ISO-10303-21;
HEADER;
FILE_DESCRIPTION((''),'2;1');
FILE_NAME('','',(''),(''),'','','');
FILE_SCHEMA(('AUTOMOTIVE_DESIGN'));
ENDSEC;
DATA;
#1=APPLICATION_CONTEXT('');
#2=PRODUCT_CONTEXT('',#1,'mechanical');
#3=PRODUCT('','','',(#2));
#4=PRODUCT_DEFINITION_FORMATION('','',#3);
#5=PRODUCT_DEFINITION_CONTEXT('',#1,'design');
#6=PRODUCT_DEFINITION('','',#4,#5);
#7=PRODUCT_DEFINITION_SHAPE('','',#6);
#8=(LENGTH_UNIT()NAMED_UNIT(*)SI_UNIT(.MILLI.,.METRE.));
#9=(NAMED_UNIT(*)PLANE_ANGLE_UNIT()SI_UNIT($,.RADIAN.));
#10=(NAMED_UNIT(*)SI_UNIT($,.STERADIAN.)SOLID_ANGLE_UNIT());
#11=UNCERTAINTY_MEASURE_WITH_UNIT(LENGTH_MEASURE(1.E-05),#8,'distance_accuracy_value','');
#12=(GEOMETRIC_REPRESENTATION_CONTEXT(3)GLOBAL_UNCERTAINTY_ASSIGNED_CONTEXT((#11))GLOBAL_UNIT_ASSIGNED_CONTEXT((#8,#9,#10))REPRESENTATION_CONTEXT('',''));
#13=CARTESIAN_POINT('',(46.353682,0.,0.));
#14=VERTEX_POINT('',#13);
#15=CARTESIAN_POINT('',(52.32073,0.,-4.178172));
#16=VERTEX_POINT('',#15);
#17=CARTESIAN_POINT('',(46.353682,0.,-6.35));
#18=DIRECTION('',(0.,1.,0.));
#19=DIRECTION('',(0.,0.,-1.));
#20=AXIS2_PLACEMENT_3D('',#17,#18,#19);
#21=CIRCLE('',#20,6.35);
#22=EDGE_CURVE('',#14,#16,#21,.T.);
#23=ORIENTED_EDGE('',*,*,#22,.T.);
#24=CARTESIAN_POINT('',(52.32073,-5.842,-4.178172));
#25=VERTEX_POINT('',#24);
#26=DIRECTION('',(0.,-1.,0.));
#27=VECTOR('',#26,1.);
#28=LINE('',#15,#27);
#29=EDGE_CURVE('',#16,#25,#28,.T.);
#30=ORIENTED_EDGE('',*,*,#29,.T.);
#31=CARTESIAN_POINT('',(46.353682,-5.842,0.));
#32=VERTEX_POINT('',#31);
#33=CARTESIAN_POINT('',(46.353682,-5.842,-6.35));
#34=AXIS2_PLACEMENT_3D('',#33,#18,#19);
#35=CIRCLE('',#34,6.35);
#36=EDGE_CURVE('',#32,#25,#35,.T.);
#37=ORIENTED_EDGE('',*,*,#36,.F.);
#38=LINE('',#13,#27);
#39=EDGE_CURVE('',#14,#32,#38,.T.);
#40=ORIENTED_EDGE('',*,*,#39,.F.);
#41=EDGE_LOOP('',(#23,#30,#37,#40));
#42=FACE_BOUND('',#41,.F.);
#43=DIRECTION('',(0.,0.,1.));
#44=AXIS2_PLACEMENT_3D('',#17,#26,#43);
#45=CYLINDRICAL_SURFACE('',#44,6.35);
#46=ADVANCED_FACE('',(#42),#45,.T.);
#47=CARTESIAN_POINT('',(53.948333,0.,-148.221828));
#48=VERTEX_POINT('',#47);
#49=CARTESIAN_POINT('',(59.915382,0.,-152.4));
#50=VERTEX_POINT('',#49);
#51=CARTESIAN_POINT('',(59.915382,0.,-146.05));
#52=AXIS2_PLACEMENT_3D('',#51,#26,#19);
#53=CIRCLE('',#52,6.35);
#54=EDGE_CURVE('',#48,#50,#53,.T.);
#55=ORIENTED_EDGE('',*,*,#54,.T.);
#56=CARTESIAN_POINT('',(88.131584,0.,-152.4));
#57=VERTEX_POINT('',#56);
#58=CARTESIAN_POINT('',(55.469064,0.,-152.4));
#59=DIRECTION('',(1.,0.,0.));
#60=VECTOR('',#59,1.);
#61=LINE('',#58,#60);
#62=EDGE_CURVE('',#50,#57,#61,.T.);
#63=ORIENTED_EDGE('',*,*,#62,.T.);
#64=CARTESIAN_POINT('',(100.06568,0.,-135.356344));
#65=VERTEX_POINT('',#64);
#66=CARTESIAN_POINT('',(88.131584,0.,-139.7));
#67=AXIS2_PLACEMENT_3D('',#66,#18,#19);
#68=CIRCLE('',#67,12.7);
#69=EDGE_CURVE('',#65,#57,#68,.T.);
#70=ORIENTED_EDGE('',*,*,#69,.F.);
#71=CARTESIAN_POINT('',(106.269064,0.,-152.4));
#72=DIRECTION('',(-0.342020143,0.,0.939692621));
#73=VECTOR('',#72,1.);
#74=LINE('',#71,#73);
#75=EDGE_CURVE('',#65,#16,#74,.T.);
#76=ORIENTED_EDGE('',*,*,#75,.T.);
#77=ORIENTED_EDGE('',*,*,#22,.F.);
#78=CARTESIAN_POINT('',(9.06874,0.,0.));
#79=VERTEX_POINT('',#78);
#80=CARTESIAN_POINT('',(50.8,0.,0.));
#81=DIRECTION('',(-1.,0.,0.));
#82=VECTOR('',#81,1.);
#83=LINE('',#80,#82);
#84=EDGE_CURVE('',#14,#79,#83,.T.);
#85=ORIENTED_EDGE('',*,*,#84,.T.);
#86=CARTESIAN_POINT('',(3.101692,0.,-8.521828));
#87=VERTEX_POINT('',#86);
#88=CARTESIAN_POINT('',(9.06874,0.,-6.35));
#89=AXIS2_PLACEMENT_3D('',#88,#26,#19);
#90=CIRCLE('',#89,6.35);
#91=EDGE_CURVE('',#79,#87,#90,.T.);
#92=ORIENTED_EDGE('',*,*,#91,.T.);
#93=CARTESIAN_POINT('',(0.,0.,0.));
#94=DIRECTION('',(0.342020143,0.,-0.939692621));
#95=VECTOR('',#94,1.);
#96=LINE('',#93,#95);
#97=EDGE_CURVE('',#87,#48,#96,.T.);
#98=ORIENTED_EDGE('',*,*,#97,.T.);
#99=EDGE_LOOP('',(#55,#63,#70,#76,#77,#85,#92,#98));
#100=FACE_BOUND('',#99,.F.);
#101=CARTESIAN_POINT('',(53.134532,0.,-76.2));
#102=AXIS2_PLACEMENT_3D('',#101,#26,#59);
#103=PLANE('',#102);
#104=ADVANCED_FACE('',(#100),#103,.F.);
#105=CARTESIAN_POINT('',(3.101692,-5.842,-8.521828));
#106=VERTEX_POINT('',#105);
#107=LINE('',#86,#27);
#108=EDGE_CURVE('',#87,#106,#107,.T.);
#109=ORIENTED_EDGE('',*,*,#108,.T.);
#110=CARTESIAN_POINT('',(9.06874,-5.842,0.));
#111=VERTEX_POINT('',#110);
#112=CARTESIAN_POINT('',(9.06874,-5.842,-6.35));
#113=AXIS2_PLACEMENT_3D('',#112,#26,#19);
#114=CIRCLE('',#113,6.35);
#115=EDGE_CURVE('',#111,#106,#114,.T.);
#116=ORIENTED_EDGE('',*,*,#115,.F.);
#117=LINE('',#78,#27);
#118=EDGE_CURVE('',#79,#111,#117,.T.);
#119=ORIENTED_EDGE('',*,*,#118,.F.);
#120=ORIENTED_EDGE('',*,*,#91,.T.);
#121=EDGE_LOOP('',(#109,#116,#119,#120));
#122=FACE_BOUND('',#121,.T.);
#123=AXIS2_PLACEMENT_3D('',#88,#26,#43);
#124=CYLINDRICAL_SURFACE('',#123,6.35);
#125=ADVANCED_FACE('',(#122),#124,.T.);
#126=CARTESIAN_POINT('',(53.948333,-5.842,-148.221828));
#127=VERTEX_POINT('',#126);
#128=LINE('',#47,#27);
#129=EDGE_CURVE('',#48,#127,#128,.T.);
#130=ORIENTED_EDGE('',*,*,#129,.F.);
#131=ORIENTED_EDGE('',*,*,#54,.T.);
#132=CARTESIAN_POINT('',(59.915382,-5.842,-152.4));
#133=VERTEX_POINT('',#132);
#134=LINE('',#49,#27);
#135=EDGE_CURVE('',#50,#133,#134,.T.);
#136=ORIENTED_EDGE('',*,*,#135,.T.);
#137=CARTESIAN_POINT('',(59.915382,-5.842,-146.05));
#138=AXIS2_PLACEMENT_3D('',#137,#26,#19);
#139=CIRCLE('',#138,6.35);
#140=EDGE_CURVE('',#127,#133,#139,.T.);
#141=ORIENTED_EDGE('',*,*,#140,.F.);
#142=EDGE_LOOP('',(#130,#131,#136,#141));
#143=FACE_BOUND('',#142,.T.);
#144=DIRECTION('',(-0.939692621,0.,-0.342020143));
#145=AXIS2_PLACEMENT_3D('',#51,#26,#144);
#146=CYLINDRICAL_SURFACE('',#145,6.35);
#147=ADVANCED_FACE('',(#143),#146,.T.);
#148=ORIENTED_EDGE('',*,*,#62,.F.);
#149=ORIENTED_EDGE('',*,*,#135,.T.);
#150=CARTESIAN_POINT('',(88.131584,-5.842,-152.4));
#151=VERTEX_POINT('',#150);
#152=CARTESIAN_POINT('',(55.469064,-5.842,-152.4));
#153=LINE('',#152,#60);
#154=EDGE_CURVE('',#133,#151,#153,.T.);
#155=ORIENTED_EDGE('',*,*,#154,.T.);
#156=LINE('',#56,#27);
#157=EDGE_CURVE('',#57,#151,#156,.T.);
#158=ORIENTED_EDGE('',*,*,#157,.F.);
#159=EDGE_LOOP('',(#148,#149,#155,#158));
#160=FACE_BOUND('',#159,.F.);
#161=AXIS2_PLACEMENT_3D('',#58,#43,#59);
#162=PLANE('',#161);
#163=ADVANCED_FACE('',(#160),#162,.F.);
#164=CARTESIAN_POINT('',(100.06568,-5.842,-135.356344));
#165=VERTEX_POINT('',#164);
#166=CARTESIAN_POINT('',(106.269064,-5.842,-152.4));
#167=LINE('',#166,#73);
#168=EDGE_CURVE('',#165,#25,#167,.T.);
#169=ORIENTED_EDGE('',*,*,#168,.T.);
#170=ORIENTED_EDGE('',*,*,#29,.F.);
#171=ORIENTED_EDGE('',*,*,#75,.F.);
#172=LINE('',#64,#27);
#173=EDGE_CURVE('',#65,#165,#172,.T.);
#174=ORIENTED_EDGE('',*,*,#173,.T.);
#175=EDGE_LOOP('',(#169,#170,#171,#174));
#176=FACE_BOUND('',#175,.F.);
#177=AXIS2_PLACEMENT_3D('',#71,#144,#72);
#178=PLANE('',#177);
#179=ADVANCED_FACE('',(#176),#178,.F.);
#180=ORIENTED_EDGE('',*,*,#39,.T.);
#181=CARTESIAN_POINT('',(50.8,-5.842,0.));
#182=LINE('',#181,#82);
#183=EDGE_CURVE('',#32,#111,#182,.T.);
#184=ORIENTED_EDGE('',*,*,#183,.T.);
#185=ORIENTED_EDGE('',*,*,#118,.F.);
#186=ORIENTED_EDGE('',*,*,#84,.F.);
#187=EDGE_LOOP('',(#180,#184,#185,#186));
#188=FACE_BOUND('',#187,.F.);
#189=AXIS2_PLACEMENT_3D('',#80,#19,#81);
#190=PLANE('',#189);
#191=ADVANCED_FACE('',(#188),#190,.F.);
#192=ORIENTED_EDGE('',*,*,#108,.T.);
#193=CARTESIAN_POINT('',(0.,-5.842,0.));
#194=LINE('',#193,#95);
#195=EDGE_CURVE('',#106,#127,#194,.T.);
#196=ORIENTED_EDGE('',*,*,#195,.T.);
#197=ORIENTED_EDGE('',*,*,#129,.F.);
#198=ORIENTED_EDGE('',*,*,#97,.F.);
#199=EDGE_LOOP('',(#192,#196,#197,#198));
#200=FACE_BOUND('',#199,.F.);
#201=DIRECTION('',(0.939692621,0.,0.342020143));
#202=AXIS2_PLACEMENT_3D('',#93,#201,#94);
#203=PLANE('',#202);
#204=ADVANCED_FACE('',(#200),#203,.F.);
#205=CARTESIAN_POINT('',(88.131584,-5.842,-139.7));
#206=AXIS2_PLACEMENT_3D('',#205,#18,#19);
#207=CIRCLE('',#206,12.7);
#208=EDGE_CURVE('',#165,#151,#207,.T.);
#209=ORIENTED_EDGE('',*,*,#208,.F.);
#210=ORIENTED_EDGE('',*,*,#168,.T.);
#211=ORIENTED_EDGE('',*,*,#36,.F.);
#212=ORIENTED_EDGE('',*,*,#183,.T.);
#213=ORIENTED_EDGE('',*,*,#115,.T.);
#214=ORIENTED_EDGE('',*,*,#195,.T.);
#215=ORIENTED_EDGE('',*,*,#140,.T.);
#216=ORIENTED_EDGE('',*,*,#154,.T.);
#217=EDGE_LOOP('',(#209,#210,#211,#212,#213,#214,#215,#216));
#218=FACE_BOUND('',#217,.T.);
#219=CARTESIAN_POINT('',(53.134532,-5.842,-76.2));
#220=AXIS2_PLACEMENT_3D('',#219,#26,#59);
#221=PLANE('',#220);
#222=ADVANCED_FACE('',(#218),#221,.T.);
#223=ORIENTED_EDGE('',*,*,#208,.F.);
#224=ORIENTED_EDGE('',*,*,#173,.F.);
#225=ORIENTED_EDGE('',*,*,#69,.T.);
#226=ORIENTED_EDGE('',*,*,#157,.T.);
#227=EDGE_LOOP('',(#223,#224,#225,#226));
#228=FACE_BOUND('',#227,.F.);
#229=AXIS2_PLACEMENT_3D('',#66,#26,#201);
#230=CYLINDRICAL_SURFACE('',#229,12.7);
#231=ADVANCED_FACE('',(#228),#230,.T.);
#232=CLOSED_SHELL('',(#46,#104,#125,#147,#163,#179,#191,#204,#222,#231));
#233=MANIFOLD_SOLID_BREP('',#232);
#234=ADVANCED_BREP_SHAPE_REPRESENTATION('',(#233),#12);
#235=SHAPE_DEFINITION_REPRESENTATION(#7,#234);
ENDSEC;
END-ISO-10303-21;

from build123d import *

# Parameters (mm, degrees)
F1_DEPTH = 5.842
F2_R     = 6.35
F3_R     = 12.7


# Not quite as in the source:
# - a length typed as a fraction of an inch, garbled in the dataset ("3 / 203.2 mm" for 3/8 in), is restored


with BuildPart() as f1:
    # F0 (on Front) → F1 (new body)
    with BuildSketch(Plane.XZ):
        Polygon((50.8, 0), (0, 0), (55.4690637022, -152.4), (106.2690637022, -152.4), align=None)
    extrude(amount=F1_DEPTH)

    # F2
    f2_edges = [f1.edges().sort_by_distance(p)[0] for p in [
        (55.469064, -2.921, -152.4),
        (50.8, -2.921, 0),
        (0, -2.921, 0),
    ]]
    fillet(f2_edges, radius=F2_R)

    # F3
    f3_edges = [f1.edges().sort_by_distance(p)[0] for p in [
        (106.269064, -2.921, -152.4),
    ]]
    fillet(f3_edges, radius=F3_R)


solid = f1.part
